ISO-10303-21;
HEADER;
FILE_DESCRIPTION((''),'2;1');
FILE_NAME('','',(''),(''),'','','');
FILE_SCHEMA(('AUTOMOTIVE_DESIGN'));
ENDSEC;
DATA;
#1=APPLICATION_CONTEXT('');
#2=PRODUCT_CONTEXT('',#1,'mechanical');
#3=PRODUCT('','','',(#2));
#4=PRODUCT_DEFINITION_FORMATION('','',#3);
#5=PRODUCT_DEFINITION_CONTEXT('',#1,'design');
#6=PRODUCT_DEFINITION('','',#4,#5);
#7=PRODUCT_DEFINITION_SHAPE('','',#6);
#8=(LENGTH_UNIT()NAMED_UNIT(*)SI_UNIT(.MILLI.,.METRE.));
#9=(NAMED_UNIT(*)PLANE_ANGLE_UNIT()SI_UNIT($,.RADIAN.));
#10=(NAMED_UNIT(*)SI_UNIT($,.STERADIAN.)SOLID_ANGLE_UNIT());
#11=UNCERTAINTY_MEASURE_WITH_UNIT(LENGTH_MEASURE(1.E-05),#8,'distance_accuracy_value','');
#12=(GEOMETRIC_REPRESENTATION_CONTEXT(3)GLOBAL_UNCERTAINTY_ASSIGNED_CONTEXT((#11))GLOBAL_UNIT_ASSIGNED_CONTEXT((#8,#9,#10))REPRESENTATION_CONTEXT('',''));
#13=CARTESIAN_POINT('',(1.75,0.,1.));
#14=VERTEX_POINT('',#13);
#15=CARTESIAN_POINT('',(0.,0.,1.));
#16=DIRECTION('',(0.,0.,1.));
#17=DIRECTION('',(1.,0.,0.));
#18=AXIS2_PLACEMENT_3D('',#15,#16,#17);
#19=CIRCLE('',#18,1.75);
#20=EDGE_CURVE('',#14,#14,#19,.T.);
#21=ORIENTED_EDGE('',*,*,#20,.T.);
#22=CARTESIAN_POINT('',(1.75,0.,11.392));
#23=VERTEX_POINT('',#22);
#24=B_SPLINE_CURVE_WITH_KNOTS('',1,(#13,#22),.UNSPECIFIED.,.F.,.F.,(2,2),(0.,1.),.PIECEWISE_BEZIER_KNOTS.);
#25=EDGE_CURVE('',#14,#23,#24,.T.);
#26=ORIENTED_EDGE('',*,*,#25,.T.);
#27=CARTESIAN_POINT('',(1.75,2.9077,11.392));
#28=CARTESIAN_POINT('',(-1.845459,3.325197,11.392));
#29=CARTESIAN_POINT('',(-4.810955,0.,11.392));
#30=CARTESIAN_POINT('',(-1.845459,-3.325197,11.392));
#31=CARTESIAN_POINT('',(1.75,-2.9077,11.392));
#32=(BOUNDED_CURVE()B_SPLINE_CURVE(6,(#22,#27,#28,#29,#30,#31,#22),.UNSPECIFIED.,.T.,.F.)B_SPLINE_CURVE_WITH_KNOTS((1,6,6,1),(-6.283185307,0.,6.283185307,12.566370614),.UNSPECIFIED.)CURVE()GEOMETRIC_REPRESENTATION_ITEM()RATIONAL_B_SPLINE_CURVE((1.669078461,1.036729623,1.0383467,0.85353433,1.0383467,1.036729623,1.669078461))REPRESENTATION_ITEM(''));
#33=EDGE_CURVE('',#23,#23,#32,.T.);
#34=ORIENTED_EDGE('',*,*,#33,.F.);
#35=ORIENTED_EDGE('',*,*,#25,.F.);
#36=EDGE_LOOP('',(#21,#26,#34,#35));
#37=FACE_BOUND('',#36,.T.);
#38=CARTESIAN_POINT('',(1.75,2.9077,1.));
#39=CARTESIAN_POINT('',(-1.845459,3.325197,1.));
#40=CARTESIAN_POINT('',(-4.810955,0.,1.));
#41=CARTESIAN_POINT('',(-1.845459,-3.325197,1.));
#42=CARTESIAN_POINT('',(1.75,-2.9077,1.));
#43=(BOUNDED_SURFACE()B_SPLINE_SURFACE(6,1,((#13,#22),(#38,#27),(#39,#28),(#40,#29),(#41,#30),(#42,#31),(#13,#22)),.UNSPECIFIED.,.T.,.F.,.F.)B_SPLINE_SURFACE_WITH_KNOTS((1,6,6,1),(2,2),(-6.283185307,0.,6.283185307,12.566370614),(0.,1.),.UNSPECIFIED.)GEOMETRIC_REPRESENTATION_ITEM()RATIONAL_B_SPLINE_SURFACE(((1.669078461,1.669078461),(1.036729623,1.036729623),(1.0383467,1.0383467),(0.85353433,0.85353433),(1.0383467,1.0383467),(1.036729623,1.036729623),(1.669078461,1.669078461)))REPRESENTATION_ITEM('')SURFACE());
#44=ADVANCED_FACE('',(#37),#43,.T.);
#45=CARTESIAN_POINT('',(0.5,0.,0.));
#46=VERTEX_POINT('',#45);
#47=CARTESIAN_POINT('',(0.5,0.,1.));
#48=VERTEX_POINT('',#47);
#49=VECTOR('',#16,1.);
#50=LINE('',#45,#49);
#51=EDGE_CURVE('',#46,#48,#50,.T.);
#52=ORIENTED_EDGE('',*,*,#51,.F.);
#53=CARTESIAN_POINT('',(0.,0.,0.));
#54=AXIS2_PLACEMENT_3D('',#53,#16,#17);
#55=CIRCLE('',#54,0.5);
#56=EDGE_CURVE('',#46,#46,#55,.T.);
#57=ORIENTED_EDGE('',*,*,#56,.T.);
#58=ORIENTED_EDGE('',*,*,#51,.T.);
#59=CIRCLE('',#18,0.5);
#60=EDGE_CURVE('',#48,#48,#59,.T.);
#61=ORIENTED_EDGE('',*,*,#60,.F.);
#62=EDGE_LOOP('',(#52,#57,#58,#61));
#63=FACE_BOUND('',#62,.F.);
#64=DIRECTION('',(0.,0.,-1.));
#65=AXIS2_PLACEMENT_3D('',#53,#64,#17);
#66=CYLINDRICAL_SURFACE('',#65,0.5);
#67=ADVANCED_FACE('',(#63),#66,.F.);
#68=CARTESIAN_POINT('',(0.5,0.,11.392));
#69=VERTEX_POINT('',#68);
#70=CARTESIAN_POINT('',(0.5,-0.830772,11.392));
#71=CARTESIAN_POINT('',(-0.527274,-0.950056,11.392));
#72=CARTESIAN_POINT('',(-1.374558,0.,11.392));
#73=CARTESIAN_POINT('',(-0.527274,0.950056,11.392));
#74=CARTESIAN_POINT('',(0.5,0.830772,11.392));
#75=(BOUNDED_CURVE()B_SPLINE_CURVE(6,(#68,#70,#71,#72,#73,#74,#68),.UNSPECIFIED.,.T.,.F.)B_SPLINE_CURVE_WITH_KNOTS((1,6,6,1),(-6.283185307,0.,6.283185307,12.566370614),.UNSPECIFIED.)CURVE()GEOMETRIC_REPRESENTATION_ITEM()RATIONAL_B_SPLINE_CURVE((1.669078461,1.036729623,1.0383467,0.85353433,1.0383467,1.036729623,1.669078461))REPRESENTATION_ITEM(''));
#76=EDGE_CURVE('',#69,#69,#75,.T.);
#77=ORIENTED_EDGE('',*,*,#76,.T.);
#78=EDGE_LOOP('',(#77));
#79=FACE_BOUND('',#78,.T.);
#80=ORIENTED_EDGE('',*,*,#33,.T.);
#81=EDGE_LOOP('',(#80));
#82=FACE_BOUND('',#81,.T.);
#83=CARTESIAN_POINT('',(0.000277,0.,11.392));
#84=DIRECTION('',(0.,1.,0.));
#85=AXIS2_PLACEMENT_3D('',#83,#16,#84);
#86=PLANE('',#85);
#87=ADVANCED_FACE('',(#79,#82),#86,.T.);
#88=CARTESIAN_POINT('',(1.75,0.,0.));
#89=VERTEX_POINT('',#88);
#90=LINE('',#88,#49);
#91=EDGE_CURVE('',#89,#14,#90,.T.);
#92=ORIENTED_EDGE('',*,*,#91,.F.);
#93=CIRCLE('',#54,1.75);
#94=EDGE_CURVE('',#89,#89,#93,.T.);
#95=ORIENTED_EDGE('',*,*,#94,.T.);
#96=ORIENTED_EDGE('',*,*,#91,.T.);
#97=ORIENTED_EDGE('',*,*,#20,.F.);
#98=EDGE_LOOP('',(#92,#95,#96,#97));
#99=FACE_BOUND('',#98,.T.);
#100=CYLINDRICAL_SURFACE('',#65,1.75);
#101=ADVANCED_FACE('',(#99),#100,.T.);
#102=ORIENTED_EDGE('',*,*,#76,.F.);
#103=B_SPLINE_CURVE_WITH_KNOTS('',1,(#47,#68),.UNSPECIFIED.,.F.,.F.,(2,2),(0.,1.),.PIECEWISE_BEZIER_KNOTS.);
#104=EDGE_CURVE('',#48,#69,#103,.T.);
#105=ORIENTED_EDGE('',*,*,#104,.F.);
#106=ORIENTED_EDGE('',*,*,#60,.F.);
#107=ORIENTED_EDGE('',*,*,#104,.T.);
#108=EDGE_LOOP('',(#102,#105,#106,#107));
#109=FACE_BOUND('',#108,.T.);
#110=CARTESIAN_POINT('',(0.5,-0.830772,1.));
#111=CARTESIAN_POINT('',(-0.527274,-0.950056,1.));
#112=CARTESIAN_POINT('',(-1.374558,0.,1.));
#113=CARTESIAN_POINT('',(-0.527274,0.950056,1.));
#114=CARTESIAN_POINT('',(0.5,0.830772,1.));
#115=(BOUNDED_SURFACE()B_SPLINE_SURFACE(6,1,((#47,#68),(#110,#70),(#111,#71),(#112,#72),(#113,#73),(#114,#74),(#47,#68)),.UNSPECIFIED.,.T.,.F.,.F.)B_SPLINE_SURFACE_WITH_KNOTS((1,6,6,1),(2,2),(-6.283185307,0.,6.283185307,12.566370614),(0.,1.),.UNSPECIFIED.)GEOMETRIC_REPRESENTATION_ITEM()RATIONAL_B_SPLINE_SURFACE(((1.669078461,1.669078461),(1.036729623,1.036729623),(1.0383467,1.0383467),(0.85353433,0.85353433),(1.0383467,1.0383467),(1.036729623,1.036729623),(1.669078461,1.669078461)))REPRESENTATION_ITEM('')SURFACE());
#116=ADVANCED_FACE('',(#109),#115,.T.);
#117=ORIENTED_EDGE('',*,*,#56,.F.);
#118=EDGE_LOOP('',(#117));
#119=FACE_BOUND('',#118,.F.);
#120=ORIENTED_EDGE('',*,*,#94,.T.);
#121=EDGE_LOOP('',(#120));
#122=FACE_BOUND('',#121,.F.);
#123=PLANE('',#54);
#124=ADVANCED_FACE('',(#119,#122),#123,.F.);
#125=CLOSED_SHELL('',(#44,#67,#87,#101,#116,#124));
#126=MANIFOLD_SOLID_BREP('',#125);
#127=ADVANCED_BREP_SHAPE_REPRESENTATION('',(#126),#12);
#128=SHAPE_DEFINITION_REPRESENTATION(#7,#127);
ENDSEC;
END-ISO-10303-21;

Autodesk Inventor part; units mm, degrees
ref_plane "YZ Plane" through (0, 0, 0) normal (1, 0, 0) x (0, 1, 0)
ref_plane "XZ Plane" through (0, 0, 0) normal (0, 1, 0) x (-1, 0, 0)
ref_plane "XY Plane" through (0, 0, 0) normal (0, 0, 1) x (1, 0, 0)
sketch "Sketch1" plane through (0, 0, 0) normal (0, 0, 1) x (1, 0, 0)
  circle A0 centre (0, 0) radius 1.75
  circle A1 centre (0, 0) radius 0.5
  dimension "d0" = 3.5
  dimension "d1" = 1
extrude "Extrusion1" add sketch "Sketch1" along normal blind 1
sketch "Sketch9" plane through (0, 0, 1) normal (0, 0, 1) x (1, 0, 0)
  circle A0 centre (0, 0) radius 0.5 projected
  circle A1 centre (0, 0) radius 1.75 projected
sketch3d "3D Sketch8"
  spline S0 degree 1 poles (0, 0, 1) (0, 0, 11.392) knots 0 0 1 1
sweep "Sweep9" add profiles "Sketch9" path "3D Sketch8"
properties part number "3d_LM - Tubo 1x1-3_pressuresensor2"
